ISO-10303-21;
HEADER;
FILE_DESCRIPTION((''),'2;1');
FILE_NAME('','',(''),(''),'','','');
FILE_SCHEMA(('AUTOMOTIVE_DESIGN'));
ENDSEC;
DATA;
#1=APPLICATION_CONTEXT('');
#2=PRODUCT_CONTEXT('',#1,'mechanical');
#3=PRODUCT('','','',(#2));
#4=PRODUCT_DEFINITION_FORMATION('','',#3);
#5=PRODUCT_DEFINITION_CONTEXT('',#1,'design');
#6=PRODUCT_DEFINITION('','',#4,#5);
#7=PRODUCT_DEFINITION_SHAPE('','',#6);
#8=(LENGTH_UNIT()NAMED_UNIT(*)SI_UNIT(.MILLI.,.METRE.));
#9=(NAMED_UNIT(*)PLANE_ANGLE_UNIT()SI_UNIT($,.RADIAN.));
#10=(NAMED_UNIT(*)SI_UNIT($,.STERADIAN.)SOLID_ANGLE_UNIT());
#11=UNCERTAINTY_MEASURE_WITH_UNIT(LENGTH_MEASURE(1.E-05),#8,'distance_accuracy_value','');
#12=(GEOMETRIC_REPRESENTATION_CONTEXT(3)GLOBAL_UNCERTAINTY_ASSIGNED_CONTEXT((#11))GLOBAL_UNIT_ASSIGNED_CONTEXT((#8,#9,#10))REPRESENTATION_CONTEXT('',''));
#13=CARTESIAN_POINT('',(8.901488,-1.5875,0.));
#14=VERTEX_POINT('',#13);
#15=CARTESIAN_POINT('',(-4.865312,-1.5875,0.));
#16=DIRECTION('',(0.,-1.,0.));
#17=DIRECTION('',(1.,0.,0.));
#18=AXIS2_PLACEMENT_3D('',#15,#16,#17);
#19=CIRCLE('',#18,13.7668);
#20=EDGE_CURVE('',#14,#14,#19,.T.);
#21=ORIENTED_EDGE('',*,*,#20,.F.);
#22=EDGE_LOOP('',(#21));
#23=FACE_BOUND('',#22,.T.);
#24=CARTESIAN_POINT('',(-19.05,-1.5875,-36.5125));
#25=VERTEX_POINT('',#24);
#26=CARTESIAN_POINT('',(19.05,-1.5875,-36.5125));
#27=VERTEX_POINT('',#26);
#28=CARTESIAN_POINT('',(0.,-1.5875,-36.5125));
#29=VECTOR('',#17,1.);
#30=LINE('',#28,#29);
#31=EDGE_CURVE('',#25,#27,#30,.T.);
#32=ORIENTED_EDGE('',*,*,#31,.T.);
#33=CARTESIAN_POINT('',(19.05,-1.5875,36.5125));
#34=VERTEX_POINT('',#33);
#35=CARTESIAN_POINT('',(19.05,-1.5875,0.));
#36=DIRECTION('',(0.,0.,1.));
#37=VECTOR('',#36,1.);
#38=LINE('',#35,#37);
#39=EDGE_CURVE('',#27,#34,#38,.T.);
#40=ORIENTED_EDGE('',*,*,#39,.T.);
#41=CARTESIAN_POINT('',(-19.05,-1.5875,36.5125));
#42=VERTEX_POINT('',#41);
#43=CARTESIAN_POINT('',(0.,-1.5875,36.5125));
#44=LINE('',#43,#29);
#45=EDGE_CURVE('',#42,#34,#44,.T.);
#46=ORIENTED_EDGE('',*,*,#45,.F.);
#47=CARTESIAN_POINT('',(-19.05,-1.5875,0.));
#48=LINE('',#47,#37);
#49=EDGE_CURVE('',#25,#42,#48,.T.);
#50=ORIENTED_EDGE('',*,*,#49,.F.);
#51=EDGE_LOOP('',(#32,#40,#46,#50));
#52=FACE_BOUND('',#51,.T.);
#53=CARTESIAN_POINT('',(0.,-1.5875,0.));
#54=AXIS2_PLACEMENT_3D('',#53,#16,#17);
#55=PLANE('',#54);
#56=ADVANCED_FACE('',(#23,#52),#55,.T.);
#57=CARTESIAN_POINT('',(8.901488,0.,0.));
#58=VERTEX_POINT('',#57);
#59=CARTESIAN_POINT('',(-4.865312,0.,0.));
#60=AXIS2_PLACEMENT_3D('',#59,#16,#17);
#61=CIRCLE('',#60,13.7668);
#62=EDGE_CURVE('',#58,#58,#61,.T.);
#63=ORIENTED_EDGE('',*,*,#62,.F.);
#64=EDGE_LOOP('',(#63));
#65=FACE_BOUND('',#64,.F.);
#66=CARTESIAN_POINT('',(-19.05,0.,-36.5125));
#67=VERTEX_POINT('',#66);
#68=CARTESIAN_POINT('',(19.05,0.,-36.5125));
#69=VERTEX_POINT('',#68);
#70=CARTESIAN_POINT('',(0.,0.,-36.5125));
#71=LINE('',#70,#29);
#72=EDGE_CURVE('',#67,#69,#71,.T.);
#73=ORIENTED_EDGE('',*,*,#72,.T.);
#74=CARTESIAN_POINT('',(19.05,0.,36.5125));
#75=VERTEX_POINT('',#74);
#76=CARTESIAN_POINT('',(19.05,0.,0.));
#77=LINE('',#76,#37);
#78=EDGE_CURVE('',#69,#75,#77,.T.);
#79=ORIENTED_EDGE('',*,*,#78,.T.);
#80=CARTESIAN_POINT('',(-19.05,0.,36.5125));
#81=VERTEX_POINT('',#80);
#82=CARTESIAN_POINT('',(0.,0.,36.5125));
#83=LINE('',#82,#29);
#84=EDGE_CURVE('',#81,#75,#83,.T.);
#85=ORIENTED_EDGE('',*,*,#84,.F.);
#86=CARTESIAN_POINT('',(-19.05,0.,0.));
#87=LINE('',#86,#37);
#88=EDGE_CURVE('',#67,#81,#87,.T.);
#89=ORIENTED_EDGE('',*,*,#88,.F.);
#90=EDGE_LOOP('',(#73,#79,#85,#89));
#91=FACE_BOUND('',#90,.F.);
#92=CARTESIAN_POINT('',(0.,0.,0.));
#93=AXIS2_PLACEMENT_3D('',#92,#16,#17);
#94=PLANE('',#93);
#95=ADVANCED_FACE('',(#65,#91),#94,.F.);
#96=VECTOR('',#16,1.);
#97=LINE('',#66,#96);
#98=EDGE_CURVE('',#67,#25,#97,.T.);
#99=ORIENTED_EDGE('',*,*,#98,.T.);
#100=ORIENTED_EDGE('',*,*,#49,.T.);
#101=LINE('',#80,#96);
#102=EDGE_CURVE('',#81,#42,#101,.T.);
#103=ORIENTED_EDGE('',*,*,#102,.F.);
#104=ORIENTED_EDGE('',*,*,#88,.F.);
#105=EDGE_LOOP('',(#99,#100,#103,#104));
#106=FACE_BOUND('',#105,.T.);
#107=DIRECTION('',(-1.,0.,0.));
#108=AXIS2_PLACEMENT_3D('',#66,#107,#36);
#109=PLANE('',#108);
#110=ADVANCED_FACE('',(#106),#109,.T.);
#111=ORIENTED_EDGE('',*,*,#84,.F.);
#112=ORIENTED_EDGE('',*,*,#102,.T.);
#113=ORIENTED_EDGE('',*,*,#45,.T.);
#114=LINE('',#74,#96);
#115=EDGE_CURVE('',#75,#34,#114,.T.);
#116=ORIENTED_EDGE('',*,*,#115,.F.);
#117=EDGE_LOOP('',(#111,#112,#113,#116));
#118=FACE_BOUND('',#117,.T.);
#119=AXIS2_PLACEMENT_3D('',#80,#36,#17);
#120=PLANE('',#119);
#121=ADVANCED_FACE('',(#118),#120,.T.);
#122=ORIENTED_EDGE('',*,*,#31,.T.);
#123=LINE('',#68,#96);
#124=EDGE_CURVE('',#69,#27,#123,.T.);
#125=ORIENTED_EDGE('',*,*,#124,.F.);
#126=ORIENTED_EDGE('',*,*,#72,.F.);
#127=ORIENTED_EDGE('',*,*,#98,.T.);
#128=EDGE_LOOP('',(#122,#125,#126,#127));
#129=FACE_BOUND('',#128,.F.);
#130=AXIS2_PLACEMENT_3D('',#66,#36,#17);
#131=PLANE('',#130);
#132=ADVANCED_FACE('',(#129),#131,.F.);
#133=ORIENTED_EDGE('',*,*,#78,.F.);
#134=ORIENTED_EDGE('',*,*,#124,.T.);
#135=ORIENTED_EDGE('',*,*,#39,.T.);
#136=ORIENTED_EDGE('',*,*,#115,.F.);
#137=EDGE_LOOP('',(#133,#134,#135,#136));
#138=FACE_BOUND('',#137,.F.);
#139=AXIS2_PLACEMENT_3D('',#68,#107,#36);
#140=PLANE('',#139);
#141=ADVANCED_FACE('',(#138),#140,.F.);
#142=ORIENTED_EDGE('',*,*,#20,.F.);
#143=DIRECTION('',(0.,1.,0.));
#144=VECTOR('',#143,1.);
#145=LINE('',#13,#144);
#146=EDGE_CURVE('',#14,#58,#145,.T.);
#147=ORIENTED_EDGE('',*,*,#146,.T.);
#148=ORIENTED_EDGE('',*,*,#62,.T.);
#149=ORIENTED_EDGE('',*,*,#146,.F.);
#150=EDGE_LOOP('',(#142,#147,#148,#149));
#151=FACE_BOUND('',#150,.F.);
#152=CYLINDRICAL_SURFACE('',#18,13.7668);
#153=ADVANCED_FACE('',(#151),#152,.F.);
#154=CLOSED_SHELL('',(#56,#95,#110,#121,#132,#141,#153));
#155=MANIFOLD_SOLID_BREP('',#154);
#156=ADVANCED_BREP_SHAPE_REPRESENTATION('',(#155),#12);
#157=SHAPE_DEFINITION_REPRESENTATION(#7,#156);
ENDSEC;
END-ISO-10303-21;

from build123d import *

# Parameters (mm, degrees)
F0_W     = 38.1
F0_H     = 73.025
F1_DEPTH = 1.5875
F2_R     = 13.7668
F3_DEPTH = 25.4


# Not quite as in the source:
# - a length typed as a fraction of an inch, garbled in the dataset ("3 / 203.2 mm" for 3/8 in), is restored


with BuildPart() as f1:
    # F0 (on Front) → F1 (new body)
    with BuildSketch(Plane.XZ):
        Rectangle(F0_W, F0_H)
    extrude(amount=F1_DEPTH)

    # F2 (on face) → F3 (cut)
    with BuildSketch(Plane.XZ.offset(1.5875)):
        with Locations((-4.8653118451, 0)):
            Circle(F2_R)
    extrude(amount=-F3_DEPTH, mode=Mode.SUBTRACT)


solid = f1.part
